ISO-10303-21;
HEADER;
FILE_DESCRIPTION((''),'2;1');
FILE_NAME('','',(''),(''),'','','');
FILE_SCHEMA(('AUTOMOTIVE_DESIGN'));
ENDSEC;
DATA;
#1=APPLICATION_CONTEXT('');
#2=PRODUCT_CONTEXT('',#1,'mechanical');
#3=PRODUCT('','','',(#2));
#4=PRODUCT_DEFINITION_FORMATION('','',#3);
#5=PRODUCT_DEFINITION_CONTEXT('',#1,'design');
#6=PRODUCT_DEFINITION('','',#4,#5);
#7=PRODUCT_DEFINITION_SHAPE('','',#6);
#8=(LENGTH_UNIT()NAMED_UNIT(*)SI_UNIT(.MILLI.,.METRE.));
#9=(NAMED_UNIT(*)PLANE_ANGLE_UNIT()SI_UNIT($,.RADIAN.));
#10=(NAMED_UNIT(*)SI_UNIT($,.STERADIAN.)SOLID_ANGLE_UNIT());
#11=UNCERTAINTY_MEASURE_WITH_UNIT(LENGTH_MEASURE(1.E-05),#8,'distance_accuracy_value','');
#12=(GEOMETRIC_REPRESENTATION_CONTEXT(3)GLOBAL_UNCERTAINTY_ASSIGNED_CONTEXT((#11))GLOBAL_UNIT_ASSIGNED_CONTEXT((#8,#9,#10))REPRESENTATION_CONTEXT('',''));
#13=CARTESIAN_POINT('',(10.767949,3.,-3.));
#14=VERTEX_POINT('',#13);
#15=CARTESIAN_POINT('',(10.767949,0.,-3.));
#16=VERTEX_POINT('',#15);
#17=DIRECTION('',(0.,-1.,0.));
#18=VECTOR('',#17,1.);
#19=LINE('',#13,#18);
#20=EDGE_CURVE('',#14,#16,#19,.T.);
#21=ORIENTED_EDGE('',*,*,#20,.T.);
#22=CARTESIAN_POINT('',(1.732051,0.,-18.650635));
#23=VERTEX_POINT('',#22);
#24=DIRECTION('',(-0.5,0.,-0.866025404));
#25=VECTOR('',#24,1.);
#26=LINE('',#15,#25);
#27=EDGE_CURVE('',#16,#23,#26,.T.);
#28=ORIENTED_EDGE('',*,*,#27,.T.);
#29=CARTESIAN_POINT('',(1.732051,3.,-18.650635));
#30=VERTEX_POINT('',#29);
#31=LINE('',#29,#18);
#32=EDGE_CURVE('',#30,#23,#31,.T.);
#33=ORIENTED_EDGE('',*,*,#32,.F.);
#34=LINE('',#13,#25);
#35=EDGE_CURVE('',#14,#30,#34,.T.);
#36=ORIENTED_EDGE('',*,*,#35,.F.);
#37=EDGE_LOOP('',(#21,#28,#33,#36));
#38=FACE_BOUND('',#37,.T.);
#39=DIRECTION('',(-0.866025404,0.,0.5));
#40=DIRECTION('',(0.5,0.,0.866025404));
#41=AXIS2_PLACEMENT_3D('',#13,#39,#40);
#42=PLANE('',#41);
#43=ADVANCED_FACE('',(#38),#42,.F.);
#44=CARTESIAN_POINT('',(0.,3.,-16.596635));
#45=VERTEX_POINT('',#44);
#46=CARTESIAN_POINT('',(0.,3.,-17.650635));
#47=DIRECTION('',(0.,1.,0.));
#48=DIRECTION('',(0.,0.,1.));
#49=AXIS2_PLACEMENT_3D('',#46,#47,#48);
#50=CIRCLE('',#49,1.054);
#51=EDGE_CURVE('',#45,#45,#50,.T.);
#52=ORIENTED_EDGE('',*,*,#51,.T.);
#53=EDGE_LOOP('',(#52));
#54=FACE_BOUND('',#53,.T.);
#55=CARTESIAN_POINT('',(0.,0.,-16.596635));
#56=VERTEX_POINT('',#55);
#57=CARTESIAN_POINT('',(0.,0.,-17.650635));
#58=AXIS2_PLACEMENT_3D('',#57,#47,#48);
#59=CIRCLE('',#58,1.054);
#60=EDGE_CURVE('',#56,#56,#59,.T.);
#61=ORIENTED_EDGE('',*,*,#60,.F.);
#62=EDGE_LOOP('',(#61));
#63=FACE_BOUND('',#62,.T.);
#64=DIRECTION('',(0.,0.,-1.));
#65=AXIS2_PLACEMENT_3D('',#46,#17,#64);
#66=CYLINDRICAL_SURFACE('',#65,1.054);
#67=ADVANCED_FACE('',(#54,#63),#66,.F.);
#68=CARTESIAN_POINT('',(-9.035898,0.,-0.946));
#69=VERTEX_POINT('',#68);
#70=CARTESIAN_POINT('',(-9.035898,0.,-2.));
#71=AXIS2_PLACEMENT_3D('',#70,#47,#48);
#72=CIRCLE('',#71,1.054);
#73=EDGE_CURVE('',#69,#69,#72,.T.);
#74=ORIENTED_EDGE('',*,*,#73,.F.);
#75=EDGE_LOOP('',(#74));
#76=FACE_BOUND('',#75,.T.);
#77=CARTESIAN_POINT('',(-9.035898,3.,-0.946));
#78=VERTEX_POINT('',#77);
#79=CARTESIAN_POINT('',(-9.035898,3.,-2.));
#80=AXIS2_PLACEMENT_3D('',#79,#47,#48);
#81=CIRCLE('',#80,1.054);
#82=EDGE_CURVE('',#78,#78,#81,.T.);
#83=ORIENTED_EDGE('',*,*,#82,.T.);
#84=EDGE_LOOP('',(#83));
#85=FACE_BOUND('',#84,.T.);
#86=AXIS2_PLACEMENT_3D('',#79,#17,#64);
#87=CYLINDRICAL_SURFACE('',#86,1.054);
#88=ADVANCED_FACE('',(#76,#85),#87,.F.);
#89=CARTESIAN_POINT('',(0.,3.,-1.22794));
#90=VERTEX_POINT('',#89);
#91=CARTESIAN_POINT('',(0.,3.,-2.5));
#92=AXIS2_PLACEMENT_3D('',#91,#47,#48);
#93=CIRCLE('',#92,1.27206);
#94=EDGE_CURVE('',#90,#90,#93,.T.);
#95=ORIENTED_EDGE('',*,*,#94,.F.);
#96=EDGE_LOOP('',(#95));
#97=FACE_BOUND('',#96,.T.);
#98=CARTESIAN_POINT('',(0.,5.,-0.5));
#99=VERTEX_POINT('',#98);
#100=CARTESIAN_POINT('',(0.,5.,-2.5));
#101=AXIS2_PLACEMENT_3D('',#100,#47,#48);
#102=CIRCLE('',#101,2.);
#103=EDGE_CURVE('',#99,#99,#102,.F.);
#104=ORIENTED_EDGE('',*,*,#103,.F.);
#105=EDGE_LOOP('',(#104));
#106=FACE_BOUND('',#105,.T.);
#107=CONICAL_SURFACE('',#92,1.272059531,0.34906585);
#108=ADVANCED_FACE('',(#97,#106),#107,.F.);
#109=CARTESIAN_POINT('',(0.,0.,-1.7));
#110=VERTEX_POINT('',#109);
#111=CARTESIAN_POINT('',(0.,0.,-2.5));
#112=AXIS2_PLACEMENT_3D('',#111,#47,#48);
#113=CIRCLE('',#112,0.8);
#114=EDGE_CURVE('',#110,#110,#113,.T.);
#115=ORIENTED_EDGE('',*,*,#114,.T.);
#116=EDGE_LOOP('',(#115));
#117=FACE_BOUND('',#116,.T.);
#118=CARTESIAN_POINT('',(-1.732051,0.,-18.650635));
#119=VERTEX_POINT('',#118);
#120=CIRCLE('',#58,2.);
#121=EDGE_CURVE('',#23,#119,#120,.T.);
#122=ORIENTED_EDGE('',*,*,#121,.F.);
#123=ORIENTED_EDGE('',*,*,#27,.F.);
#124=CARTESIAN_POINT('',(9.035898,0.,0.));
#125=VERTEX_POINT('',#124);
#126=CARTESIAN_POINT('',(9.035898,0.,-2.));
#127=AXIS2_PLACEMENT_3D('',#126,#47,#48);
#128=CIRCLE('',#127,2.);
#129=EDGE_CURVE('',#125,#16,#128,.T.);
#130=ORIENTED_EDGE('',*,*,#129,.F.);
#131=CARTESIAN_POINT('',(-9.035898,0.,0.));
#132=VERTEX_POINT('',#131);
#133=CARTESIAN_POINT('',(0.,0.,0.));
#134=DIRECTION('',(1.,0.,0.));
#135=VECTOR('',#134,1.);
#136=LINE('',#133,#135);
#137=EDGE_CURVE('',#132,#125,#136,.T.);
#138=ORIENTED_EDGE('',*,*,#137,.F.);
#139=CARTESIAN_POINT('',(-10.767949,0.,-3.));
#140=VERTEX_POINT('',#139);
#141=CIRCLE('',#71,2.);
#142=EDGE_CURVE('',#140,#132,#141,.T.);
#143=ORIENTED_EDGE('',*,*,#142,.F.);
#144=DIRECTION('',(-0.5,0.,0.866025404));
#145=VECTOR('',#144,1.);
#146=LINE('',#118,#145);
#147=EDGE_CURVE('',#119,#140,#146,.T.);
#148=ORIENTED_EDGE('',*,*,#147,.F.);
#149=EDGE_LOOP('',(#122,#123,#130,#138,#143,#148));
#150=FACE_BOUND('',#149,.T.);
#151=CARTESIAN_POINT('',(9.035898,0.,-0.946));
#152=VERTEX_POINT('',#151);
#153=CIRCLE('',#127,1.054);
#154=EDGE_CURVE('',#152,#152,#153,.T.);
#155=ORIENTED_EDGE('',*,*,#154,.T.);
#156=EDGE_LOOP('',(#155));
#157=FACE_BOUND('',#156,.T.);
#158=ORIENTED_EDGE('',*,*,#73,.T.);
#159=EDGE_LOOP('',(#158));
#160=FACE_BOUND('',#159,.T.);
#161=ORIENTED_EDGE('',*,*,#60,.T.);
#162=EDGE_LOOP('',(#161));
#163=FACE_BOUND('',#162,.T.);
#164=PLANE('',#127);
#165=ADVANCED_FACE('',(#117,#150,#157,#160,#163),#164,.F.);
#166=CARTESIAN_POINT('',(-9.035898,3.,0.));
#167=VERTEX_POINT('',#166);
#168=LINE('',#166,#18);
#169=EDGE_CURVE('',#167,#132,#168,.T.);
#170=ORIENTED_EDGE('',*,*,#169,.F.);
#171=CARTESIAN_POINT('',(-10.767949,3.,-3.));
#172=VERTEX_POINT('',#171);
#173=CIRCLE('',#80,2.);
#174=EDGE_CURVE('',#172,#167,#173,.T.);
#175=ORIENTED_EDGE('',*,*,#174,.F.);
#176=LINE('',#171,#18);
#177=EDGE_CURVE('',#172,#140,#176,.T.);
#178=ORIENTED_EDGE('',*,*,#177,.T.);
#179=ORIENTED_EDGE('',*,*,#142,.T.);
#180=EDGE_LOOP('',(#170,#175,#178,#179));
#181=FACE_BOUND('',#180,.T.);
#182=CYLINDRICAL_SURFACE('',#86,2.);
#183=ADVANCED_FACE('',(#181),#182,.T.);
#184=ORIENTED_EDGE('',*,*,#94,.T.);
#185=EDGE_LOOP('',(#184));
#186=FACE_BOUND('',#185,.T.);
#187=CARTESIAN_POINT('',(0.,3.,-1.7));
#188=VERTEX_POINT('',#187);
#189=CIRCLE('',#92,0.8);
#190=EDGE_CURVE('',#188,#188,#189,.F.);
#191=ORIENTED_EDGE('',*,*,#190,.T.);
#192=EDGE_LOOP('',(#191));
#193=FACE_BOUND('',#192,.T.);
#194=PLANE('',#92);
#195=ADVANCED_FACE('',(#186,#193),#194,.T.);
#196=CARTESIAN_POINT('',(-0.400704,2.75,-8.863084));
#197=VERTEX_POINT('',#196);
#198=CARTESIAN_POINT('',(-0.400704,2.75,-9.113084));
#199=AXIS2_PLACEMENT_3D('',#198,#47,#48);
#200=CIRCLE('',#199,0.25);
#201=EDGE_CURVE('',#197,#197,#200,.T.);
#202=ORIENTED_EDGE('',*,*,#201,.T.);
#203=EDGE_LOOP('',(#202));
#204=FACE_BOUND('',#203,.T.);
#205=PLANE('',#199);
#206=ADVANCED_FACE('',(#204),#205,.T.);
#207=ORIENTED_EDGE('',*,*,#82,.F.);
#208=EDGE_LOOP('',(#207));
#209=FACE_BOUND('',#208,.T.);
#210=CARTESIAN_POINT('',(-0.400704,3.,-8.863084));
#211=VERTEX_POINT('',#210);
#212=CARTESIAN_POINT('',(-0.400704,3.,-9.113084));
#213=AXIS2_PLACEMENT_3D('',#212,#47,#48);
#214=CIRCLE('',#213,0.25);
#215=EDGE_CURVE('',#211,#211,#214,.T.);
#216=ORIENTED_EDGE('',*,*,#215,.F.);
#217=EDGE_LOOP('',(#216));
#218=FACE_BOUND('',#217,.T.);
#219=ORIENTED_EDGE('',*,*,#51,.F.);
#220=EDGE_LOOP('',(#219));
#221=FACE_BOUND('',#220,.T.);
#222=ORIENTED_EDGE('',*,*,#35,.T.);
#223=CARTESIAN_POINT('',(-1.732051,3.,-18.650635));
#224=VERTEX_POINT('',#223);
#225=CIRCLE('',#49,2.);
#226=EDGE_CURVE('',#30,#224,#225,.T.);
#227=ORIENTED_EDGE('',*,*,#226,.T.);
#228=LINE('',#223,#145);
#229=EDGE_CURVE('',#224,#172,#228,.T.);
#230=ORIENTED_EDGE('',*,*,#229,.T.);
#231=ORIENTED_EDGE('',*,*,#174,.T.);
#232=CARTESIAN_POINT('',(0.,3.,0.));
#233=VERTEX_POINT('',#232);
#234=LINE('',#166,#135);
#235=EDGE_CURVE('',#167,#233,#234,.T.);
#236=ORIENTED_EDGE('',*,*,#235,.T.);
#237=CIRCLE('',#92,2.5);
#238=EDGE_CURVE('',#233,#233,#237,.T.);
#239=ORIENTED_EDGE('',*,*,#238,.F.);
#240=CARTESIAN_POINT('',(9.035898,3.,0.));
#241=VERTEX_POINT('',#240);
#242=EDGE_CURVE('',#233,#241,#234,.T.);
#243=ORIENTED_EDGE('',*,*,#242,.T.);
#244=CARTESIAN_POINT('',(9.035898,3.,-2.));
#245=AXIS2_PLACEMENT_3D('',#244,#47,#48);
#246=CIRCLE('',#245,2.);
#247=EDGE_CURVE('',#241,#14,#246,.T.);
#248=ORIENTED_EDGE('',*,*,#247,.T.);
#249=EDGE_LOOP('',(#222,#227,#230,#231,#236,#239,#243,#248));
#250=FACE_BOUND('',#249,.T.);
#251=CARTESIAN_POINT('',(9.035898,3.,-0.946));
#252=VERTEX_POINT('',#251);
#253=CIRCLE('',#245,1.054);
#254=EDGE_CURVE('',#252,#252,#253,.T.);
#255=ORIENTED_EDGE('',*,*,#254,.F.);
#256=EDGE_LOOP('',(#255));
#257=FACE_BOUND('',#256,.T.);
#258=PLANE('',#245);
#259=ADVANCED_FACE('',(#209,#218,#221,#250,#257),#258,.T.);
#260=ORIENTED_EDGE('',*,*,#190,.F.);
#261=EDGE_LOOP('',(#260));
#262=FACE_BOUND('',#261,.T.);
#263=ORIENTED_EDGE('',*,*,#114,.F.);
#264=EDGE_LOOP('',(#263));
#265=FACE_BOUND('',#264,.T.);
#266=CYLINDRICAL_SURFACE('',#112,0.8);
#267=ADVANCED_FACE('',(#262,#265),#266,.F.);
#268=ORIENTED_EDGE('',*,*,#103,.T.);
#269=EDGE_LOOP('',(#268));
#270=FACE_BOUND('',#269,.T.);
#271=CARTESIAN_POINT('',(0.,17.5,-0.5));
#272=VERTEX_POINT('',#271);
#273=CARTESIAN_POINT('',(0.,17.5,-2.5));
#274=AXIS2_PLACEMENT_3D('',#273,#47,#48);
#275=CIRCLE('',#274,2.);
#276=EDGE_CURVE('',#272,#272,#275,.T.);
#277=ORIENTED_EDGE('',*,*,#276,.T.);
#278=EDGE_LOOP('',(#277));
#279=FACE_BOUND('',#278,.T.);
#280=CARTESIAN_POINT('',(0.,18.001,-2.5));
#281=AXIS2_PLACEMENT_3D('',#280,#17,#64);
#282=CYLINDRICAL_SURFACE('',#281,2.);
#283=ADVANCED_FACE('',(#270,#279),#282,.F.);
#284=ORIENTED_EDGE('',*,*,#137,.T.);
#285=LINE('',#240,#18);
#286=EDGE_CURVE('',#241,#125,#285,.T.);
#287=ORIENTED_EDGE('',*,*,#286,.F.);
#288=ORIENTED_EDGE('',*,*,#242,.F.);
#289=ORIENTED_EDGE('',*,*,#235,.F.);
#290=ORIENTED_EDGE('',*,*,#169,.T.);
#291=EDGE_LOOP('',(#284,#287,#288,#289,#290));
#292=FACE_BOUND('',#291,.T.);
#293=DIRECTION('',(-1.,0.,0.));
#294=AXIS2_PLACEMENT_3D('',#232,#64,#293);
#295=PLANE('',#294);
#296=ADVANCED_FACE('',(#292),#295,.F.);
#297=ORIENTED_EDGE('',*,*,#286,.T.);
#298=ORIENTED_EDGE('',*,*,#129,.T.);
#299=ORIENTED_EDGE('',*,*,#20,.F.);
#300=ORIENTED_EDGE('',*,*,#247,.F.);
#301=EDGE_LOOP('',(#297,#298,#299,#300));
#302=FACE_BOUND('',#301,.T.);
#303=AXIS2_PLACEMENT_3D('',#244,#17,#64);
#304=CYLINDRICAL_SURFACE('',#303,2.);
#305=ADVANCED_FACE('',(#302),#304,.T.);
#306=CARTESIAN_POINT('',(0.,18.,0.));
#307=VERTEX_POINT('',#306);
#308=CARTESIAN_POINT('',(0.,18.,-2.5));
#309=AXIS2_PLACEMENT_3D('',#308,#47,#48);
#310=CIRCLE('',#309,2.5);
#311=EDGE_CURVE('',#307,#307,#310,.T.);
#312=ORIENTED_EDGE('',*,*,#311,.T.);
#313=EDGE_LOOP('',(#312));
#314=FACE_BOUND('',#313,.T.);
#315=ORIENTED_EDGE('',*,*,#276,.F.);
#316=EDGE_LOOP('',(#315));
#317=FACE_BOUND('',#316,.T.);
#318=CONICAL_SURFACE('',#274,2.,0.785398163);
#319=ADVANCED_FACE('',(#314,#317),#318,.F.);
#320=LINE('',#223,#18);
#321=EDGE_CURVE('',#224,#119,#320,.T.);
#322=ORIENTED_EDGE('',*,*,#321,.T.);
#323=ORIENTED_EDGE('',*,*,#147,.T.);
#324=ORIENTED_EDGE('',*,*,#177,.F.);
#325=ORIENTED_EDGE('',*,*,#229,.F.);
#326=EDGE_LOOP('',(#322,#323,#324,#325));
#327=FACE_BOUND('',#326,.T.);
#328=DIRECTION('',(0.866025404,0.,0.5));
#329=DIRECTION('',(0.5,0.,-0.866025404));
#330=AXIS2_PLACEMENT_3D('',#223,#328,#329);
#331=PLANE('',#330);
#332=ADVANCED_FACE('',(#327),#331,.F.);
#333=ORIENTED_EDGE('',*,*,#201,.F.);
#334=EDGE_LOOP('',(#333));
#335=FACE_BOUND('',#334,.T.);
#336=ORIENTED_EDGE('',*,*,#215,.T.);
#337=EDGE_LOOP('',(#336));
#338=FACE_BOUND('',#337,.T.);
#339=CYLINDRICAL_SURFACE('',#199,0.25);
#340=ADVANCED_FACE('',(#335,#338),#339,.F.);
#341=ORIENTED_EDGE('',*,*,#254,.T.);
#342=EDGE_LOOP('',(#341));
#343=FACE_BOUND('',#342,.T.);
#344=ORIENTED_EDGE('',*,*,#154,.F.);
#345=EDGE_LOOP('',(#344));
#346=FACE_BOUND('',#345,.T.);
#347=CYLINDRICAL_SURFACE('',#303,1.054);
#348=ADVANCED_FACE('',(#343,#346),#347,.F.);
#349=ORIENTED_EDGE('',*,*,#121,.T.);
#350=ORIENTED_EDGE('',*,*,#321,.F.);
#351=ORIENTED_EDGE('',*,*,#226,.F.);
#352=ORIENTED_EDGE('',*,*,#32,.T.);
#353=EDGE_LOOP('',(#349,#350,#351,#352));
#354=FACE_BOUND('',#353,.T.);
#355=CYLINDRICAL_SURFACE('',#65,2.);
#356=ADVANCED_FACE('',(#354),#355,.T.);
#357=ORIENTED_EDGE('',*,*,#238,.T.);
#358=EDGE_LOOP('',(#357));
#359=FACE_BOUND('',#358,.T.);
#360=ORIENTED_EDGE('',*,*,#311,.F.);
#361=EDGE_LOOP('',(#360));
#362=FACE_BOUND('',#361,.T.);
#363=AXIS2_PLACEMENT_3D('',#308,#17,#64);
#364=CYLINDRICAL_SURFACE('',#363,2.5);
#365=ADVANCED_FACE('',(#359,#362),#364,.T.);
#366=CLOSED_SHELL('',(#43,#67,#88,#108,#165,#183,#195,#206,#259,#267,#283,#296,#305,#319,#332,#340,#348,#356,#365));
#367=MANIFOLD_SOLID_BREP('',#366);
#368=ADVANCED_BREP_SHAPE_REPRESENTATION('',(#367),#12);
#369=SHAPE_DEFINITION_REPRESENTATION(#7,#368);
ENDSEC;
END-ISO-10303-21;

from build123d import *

# Parameters (mm, degrees)
SKETCH1_R           = 1.054
BOSS_EXTRUDE1_DEPTH = 3
SKETCH2_R           = 0.8
CUT_EXTRUDE1_DEPTH  = 23.736281859
SKETCH3_R           = 2.5
BOSS_EXTRUDE2_DEPTH = 15
CUT_EXTRUDE2_REACH  = 29.073
SKETCH4_R           = 2
CHAMFER1_SIZE       = 2
CHAMFER1_SIZE2      = 0.727940469
CHAMFER2_SIZE       = 0.5
SKETCH5_R           = 0.25
CUT_EXTRUDE3_DEPTH  = 0.25


with BuildPart() as part:
    # Sketch1 → Boss-Extrude1 (new body)
    with BuildSketch(Plane(origin=(0, 0, 0), x_dir=(1, 0, 0), z_dir=(0, 1, 0))):
        with BuildLine():
            Line((0, 0), (9.035898385, 0))
            ThreePointArc((9.035898385, 0), (10.767949192, 1), (10.767949192, 3))
            Line((10.767949192, 3), (1.732050808, 18.650635095))
            ThreePointArc((1.732050808, 18.650635095), (0, 19.650635095), (-1.732050808, 18.650635095))
            Line((-1.732050808, 18.650635095), (-10.767949192, 3))
            ThreePointArc((-10.767949192, 3), (-10.767949192, 1), (-9.035898385, 0))
            Line((-9.035898385, 0), (0, 0))
        make_face()
        with Locations(Location((0, 17.650635095, 0), (0, 0, 270))):
            Circle(SKETCH1_R, mode=Mode.SUBTRACT)
        with Locations(Location((-9.035898385, 2, 0), (0, 0, 270))):
            Circle(SKETCH1_R, mode=Mode.SUBTRACT)
        with Locations(Location((9.035898385, 2, 0), (0, 0, 270))):
            Circle(SKETCH1_R, mode=Mode.SUBTRACT)
    extrude(amount=BOSS_EXTRUDE1_DEPTH)

    # Sketch2 → Cut-Extrude1 (cut, through all)
    with BuildSketch(Plane(origin=(0, 3, 0), x_dir=(1, 0, 0), z_dir=(0, 1, 0))):
        with Locations(Location((0, 2.5, 0), (0, 0, 270))):
            Circle(SKETCH2_R)
    extrude(amount=-CUT_EXTRUDE1_DEPTH, mode=Mode.SUBTRACT)

    # Sketch3 → Boss-Extrude2 (add)
    with BuildSketch(Plane(origin=(0, 3, 0), x_dir=(1, 0, 0), z_dir=(0, 1, 0))):
        with Locations(Location((0, 2.5, 0), (0, 0, 270))):
            Circle(SKETCH3_R)
    extrude(amount=BOSS_EXTRUDE2_DEPTH)

    # Sketch4 → Cut-Extrude2 (cut, up to next)
    with BuildSketch(Plane(origin=(0, 3, 0), x_dir=(1, 0, 0), z_dir=(0, 1, 0)), mode=Mode.PRIVATE) as cut_extrude2_sk1:
        with Locations(Location((0, 2.5, 0), (0, 0, 270))):
            Circle(SKETCH4_R)
    cut_extrude2_tool1 = extrude(cut_extrude2_sk1.sketch, amount=CUT_EXTRUDE2_REACH, mode=Mode.PRIVATE) & part.part
    add(cut_extrude2_tool1.solids().sort_by_distance((0, 3, -2.5))[0], mode=Mode.SUBTRACT)

    # Chamfer1
    chamfer1_edges = [part.edges().sort_by_distance(p)[0] for p in [
        (0, 3, -4.5),
    ]]
    chamfer1_side = [part.faces().sort_by_distance(p)[0] for p in [
        (0, 10.5, -4.5),
    ]]
    chamfer(chamfer1_edges, length=CHAMFER1_SIZE, length2=CHAMFER1_SIZE2, reference=chamfer1_side[0])

    # Chamfer2
    chamfer2_edges = [part.edges().sort_by_distance(p)[0] for p in [
        (0, 18, -4.5),
    ]]
    chamfer(chamfer2_edges, length=CHAMFER2_SIZE - 0.0001)  # a hair under: the kernel refuses the full size

    # Sketch5 → Cut-Extrude3 (cut)
    with BuildSketch(Plane(origin=(0, 3, 0), x_dir=(1, 0, 0), z_dir=(0, 1, 0))):
        with Locations(Location((-0.400704282, 9.113083691, 0), (0, 0, 270))):
            Circle(SKETCH5_R)
    extrude(amount=-CUT_EXTRUDE3_DEPTH, mode=Mode.SUBTRACT)


solid = part.part
